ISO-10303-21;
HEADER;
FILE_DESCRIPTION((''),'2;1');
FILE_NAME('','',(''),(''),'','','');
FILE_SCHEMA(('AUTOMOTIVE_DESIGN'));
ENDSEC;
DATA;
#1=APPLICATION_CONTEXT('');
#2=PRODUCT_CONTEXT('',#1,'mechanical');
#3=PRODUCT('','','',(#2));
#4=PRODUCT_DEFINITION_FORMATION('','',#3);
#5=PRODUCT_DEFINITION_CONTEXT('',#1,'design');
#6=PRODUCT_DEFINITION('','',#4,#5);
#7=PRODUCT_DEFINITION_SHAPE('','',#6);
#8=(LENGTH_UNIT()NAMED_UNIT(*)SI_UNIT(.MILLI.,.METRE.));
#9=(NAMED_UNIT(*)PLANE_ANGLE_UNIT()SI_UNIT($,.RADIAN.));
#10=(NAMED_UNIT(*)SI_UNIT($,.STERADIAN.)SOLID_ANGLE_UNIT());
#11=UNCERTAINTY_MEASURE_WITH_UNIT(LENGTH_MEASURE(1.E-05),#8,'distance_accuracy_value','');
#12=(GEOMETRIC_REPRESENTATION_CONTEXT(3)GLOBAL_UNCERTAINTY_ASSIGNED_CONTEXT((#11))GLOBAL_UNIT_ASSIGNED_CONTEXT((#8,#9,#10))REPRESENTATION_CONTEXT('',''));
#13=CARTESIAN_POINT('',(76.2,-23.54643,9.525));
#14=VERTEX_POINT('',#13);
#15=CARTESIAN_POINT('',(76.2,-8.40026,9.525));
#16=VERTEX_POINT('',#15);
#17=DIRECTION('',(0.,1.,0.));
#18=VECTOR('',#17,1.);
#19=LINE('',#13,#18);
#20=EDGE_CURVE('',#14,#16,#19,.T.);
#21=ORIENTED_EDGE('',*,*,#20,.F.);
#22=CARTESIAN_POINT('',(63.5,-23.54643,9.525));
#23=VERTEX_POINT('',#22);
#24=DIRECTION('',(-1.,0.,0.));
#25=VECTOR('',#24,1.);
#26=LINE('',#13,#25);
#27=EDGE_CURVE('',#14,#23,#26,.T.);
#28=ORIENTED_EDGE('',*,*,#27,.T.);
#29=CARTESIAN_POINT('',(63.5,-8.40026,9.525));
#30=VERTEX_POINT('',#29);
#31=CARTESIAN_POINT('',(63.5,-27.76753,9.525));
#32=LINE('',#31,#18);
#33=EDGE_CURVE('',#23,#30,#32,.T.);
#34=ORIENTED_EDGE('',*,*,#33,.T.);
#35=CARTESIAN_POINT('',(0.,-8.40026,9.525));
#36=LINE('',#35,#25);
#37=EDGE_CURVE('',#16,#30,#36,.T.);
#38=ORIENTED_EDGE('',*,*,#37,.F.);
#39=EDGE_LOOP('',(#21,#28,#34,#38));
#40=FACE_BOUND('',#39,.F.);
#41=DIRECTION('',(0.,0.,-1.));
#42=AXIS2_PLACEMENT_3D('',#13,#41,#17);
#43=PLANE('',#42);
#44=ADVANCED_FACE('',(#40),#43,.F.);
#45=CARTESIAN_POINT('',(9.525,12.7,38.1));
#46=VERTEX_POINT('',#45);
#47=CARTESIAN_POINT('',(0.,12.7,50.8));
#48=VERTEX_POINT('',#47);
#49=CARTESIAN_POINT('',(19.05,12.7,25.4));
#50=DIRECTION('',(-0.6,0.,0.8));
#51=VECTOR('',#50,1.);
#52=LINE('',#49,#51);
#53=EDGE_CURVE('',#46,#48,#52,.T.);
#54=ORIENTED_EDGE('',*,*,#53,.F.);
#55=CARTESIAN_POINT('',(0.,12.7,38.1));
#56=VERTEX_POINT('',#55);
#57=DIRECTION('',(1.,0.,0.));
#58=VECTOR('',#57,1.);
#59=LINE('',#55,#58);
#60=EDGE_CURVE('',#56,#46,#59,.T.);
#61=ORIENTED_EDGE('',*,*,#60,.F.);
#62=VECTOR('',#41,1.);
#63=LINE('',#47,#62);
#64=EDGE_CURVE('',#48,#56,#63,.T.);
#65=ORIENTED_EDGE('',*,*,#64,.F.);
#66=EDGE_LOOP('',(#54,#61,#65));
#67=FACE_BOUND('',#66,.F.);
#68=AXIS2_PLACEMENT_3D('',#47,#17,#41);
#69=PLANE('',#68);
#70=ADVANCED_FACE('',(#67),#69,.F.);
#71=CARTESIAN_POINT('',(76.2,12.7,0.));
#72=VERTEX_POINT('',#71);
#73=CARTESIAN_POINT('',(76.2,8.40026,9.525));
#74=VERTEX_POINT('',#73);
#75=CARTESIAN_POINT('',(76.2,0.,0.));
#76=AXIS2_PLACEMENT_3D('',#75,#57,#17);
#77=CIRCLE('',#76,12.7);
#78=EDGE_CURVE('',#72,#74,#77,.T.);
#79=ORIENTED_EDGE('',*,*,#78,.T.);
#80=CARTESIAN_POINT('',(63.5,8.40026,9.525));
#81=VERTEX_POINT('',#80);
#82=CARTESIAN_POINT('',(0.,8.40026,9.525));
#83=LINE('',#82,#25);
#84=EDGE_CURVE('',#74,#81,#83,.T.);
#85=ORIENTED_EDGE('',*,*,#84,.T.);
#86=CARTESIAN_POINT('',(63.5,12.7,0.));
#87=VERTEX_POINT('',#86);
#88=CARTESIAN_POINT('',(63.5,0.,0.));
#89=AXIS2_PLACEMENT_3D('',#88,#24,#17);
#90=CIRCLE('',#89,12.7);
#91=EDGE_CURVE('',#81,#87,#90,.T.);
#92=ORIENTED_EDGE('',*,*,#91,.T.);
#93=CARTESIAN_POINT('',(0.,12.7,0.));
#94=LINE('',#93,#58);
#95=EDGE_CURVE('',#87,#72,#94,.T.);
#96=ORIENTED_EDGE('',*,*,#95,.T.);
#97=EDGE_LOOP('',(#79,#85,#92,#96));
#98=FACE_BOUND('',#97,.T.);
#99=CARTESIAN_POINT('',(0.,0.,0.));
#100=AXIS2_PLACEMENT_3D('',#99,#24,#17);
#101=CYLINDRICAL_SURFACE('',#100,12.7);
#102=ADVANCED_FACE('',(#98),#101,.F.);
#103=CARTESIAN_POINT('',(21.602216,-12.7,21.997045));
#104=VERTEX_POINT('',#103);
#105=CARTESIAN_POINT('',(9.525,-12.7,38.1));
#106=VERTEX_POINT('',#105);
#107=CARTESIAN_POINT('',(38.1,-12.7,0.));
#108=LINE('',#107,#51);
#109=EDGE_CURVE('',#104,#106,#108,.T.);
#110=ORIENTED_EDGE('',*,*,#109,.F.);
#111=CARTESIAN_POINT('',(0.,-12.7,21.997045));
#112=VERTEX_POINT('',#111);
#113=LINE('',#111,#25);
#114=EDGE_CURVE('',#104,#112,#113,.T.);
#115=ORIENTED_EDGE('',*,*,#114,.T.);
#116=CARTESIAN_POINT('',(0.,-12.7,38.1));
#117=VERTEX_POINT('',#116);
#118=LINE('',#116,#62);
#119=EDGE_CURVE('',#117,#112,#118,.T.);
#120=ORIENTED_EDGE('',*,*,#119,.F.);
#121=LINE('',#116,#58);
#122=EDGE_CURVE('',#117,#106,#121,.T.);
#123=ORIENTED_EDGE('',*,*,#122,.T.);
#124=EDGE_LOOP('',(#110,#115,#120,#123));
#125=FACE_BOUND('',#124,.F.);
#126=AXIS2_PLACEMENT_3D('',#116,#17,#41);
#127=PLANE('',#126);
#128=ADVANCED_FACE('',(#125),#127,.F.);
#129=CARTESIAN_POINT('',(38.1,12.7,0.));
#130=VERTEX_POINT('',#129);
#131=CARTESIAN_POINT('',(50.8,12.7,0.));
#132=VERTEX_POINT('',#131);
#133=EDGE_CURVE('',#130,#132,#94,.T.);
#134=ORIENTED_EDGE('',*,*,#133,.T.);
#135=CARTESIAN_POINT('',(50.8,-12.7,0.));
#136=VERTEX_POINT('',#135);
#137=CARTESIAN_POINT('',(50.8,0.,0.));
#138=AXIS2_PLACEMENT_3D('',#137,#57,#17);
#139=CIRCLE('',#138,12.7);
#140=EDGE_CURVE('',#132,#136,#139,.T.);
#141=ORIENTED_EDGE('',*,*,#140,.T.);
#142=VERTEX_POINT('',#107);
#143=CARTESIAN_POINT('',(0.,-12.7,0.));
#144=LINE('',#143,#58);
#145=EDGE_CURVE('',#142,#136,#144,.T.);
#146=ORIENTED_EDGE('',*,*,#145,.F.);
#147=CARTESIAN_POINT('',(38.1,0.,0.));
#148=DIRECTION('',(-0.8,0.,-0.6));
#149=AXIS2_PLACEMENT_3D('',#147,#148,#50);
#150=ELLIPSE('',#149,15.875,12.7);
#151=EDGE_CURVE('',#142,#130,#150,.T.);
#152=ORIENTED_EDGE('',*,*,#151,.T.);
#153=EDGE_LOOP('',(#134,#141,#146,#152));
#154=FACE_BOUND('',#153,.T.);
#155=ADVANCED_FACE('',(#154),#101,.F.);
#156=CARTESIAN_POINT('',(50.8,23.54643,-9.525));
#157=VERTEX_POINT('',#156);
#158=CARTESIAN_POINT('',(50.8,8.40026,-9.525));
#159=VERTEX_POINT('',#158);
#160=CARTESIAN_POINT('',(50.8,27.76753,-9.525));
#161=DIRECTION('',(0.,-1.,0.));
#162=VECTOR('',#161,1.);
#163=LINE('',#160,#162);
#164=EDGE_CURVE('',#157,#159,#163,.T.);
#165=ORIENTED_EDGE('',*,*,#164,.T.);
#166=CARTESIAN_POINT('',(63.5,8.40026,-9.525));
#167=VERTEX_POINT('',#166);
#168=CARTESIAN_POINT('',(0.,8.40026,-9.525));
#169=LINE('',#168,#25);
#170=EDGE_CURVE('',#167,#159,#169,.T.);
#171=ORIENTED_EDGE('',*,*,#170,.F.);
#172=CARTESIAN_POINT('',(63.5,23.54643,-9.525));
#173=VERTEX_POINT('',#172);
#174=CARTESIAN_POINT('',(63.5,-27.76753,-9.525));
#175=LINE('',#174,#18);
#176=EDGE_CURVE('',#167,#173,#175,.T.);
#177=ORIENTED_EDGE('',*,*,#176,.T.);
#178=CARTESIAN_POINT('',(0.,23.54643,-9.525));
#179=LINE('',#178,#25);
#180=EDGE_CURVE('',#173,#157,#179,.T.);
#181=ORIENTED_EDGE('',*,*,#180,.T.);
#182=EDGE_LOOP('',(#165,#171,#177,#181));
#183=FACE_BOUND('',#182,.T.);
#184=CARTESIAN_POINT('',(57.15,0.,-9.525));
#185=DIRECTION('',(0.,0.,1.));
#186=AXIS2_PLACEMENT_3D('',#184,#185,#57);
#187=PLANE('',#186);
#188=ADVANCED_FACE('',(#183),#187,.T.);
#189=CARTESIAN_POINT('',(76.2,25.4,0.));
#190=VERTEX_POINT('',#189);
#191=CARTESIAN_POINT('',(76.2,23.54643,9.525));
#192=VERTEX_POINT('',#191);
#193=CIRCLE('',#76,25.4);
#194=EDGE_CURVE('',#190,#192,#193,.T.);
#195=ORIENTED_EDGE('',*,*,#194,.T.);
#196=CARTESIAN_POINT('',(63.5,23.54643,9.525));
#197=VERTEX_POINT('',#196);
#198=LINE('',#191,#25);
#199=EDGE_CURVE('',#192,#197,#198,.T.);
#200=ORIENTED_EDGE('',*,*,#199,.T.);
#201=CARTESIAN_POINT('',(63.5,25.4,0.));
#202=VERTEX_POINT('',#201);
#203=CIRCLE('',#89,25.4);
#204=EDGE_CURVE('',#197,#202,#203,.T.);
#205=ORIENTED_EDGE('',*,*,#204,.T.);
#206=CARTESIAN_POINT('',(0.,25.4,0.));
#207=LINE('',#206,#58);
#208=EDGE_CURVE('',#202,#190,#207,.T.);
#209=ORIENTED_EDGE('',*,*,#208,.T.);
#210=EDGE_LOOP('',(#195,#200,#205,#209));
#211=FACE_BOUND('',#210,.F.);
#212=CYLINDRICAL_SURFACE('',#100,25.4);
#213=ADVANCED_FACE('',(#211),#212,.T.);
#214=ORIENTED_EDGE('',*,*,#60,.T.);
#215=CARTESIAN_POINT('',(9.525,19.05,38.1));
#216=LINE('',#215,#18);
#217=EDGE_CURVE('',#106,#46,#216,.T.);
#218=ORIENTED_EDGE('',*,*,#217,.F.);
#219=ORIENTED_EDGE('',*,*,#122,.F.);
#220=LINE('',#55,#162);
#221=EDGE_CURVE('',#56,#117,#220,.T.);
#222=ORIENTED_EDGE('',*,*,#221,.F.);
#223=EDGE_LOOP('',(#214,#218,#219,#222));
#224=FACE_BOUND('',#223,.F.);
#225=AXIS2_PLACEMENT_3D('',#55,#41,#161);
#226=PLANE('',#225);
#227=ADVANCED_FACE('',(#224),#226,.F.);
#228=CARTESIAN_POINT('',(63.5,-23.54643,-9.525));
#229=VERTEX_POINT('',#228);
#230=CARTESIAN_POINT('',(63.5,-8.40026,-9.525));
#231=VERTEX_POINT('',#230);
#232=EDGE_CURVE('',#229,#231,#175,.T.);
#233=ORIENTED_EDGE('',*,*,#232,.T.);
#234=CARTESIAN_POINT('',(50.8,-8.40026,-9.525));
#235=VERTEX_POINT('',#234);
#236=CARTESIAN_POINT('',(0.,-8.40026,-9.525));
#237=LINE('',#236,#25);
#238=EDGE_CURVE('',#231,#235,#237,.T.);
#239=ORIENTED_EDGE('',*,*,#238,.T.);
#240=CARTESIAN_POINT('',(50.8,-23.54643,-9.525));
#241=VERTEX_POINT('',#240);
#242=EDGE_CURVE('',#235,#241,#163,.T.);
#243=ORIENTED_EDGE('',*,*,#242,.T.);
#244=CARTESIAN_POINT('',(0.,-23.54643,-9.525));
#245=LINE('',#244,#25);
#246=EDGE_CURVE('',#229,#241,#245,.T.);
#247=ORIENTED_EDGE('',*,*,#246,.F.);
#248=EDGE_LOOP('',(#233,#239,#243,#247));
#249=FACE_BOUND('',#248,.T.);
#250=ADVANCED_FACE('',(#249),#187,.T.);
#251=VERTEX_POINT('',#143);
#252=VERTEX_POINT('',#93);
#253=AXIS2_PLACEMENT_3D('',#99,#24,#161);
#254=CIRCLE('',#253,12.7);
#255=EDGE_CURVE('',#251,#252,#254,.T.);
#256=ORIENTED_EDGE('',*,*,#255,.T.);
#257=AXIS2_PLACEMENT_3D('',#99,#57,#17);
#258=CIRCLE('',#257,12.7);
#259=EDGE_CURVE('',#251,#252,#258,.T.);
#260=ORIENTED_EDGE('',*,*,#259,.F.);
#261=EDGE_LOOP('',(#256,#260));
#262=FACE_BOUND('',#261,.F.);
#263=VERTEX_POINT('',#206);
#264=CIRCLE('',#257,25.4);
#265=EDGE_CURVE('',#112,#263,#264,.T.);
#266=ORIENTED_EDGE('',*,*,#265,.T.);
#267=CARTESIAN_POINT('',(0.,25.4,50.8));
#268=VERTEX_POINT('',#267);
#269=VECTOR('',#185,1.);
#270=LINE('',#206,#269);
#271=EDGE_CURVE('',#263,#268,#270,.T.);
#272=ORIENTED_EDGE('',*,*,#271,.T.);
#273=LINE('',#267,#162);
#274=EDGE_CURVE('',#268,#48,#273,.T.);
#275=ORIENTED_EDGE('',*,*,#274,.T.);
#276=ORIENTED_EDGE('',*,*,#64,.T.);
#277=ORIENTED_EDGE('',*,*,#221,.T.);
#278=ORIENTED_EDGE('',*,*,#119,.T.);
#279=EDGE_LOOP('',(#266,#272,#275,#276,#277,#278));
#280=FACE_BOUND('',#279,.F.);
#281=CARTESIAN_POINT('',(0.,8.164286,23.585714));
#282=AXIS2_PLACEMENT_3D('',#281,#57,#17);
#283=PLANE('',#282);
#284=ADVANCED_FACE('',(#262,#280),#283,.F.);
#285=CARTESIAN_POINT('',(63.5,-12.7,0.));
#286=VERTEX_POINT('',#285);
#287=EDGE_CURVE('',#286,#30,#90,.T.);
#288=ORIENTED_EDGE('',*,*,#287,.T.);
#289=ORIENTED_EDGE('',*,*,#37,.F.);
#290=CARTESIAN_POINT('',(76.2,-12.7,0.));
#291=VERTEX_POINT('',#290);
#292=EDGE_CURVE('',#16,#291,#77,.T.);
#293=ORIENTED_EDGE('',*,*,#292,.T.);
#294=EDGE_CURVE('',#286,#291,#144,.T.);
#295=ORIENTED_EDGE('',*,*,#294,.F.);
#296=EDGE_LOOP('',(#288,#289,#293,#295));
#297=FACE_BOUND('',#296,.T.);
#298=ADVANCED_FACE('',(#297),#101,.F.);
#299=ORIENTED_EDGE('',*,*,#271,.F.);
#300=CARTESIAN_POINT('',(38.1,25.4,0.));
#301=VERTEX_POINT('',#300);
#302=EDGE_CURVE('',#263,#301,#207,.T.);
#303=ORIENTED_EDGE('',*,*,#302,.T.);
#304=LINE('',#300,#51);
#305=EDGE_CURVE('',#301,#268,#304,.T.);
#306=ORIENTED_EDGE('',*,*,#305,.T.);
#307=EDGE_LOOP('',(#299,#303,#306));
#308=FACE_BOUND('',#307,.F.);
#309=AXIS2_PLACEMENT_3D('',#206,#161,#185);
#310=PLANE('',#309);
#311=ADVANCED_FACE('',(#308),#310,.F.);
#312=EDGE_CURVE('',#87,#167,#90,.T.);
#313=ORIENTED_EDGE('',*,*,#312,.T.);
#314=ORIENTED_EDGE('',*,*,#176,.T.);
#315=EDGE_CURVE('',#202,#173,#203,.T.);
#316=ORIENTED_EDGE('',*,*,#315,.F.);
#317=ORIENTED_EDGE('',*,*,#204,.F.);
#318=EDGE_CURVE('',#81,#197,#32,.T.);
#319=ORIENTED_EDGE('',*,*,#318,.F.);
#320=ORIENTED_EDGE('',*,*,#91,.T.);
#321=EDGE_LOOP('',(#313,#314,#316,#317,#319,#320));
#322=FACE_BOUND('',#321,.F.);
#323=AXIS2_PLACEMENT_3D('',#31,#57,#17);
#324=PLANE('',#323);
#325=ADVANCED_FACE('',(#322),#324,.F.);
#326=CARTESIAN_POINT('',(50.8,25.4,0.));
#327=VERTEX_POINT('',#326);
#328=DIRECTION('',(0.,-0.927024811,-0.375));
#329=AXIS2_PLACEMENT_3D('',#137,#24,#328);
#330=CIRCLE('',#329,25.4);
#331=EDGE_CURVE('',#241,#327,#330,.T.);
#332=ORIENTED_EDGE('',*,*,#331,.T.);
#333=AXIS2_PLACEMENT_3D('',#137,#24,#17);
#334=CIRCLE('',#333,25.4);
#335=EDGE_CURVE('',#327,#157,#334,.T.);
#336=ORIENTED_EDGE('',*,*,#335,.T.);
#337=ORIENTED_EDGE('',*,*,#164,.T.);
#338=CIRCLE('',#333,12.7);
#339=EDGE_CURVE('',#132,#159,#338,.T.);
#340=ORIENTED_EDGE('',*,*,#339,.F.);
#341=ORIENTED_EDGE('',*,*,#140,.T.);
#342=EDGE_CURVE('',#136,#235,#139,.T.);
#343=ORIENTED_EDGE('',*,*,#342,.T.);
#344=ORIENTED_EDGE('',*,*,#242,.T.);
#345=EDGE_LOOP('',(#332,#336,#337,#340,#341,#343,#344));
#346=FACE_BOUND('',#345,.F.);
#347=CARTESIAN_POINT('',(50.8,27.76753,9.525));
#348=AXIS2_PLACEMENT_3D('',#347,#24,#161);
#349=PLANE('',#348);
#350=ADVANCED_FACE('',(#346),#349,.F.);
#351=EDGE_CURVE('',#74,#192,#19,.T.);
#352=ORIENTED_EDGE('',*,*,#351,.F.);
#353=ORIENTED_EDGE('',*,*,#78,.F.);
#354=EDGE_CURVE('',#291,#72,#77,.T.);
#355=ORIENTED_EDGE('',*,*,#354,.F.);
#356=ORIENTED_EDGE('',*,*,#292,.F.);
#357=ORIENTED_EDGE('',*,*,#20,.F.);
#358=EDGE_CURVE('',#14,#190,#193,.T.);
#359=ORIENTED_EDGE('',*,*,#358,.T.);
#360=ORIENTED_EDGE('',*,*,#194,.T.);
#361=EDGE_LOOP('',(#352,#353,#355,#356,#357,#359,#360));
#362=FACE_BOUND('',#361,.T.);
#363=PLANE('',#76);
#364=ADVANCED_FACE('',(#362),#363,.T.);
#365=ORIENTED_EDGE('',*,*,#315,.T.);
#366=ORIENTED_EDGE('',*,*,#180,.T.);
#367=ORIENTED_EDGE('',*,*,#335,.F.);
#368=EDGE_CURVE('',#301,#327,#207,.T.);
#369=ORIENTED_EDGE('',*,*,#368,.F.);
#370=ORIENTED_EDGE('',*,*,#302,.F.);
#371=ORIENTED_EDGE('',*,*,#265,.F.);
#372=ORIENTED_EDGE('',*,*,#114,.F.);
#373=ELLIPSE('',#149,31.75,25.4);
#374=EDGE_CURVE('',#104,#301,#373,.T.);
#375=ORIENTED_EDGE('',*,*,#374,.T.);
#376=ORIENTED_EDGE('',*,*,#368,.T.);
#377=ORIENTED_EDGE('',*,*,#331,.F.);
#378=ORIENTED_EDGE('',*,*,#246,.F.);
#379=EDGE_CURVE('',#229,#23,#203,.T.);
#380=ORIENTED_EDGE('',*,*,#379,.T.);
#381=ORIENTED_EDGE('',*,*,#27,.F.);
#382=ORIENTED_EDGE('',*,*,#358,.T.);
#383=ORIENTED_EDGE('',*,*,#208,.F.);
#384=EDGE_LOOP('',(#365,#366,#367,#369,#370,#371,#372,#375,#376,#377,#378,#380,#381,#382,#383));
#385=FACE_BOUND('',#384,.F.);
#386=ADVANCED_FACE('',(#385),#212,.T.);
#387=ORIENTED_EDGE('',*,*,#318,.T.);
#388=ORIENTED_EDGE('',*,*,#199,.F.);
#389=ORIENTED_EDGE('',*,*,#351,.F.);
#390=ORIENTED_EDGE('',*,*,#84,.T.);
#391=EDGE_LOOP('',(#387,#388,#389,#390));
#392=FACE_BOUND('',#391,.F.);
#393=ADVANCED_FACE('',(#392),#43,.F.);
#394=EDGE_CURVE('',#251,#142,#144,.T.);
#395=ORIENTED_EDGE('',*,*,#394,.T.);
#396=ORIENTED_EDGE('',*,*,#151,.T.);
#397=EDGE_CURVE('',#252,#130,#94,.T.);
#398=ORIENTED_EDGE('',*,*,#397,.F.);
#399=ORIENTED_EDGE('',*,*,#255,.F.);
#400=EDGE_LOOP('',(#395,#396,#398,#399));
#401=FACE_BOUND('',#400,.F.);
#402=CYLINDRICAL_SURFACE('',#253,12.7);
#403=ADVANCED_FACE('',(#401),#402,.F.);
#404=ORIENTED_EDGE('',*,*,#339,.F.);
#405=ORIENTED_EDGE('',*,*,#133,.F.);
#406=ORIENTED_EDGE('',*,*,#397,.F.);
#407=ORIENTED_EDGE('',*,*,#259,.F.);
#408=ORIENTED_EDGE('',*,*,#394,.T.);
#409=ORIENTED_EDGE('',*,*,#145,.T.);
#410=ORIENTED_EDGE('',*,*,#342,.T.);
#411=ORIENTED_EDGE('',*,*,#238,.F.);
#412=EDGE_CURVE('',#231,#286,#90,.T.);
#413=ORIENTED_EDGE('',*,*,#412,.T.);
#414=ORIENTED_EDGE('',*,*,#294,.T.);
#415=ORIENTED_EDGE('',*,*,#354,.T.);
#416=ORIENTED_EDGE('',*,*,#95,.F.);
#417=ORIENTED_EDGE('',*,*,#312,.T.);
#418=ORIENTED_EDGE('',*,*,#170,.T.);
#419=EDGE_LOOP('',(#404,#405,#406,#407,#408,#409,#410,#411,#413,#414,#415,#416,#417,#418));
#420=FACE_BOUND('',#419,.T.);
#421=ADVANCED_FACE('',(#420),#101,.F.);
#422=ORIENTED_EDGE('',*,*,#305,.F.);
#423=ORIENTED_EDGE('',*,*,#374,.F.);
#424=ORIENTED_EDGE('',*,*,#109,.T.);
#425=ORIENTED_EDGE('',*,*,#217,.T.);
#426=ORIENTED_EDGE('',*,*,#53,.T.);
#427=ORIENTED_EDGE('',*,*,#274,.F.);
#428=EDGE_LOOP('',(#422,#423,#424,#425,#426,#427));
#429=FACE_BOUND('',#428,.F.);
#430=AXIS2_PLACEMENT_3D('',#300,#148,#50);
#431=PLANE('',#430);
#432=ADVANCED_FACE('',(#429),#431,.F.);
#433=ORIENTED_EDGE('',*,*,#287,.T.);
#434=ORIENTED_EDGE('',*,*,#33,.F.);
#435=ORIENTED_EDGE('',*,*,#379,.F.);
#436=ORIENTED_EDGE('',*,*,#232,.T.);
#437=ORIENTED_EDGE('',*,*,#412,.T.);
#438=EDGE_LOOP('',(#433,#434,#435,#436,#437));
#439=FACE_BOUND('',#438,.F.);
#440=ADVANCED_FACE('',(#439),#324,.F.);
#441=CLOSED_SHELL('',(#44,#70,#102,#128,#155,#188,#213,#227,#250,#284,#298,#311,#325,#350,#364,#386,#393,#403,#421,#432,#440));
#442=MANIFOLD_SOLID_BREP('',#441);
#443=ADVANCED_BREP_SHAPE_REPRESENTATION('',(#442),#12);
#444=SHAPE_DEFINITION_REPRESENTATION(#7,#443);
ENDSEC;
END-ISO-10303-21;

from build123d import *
from build123d import SkipClean  # not in build123d's __all__

# Parameters (mm, degrees)
F1_DEPTH  = 38.1
F4_DEPTH  = 38.1
F2_R      = 25.4
F2_R_2    = 12.7
F5_DEPTH  = 76.2
F6_W      = 23.5464301965
F6_H      = 15.875
F7_DEPTH  = 25.4
F9_DEPTH  = 19.05
F11_R     = 12.7
F12_DEPTH = 76.201


# Not quite as in the source:
# - a feature of the source that left no trace in its solid (it failed there, or was rolled back) is left out


with BuildPart() as f1:
    # F0 (on Right) → F1 (new body)
    with BuildSketch(Plane.YZ):
        Polygon((-12.7, 0), (0, 0), (25.4, 0), (25.4, 50.8), (12.7, 50.8), (12.7, 38.1), (0, 38.1), (-12.7, 38.1), align=None)
    extrude(amount=F1_DEPTH)

    # F3 (on face) → F4 (cut)
    with BuildSketch(Plane(origin=(0, 25.4, 0), x_dir=(-1, 0, 0), z_dir=(0, 1, 0))):
        Polygon((-38.1, 50.8), (-38.1, 0), (0, 50.8), align=None)
    extrude(amount=-F4_DEPTH, mode=Mode.SUBTRACT)

    # F2 (on Right) → F5 (join)
    with BuildSketch(Plane.YZ):
        Circle(F2_R)
        Circle(F2_R_2, mode=Mode.SUBTRACT)
    extrude(amount=F5_DEPTH)

    # F6 (on face) → F7 (cut)
    with BuildSketch(Plane.YZ.offset(76.2)):
        with Locations((11.7732150983, 17.4625)):
            Rectangle(F6_W, F6_H)
        with Locations((-11.7732150983, 17.4625)):
            Rectangle(F6_W, F6_H)
    extrude(amount=-F7_DEPTH, mode=Mode.SUBTRACT)

    # F8 (on face) → F9 (cut)
    with BuildSketch(Plane.XY.offset(9.525)):
        Polygon((63.5, -27.7675297111), (63.5, 8.4002604126), (63.5, 27.7675297111), (50.8, 27.7675297111), (50.8, -27.7675297111), align=None)
    extrude(amount=-F9_DEPTH, mode=Mode.SUBTRACT)

    # F11 (on face) → F12 (cut, through all)
    with BuildSketch(Plane(origin=(0, 0, 0), x_dir=(0, -1, 0), z_dir=(-1, 0, 0))):
        Circle(F11_R)
    with SkipClean():  # cleaning this boolean's faces spoils the solid; the shape is the same uncleaned
        extrude(amount=-F12_DEPTH, mode=Mode.SUBTRACT)


solid = f1.part
